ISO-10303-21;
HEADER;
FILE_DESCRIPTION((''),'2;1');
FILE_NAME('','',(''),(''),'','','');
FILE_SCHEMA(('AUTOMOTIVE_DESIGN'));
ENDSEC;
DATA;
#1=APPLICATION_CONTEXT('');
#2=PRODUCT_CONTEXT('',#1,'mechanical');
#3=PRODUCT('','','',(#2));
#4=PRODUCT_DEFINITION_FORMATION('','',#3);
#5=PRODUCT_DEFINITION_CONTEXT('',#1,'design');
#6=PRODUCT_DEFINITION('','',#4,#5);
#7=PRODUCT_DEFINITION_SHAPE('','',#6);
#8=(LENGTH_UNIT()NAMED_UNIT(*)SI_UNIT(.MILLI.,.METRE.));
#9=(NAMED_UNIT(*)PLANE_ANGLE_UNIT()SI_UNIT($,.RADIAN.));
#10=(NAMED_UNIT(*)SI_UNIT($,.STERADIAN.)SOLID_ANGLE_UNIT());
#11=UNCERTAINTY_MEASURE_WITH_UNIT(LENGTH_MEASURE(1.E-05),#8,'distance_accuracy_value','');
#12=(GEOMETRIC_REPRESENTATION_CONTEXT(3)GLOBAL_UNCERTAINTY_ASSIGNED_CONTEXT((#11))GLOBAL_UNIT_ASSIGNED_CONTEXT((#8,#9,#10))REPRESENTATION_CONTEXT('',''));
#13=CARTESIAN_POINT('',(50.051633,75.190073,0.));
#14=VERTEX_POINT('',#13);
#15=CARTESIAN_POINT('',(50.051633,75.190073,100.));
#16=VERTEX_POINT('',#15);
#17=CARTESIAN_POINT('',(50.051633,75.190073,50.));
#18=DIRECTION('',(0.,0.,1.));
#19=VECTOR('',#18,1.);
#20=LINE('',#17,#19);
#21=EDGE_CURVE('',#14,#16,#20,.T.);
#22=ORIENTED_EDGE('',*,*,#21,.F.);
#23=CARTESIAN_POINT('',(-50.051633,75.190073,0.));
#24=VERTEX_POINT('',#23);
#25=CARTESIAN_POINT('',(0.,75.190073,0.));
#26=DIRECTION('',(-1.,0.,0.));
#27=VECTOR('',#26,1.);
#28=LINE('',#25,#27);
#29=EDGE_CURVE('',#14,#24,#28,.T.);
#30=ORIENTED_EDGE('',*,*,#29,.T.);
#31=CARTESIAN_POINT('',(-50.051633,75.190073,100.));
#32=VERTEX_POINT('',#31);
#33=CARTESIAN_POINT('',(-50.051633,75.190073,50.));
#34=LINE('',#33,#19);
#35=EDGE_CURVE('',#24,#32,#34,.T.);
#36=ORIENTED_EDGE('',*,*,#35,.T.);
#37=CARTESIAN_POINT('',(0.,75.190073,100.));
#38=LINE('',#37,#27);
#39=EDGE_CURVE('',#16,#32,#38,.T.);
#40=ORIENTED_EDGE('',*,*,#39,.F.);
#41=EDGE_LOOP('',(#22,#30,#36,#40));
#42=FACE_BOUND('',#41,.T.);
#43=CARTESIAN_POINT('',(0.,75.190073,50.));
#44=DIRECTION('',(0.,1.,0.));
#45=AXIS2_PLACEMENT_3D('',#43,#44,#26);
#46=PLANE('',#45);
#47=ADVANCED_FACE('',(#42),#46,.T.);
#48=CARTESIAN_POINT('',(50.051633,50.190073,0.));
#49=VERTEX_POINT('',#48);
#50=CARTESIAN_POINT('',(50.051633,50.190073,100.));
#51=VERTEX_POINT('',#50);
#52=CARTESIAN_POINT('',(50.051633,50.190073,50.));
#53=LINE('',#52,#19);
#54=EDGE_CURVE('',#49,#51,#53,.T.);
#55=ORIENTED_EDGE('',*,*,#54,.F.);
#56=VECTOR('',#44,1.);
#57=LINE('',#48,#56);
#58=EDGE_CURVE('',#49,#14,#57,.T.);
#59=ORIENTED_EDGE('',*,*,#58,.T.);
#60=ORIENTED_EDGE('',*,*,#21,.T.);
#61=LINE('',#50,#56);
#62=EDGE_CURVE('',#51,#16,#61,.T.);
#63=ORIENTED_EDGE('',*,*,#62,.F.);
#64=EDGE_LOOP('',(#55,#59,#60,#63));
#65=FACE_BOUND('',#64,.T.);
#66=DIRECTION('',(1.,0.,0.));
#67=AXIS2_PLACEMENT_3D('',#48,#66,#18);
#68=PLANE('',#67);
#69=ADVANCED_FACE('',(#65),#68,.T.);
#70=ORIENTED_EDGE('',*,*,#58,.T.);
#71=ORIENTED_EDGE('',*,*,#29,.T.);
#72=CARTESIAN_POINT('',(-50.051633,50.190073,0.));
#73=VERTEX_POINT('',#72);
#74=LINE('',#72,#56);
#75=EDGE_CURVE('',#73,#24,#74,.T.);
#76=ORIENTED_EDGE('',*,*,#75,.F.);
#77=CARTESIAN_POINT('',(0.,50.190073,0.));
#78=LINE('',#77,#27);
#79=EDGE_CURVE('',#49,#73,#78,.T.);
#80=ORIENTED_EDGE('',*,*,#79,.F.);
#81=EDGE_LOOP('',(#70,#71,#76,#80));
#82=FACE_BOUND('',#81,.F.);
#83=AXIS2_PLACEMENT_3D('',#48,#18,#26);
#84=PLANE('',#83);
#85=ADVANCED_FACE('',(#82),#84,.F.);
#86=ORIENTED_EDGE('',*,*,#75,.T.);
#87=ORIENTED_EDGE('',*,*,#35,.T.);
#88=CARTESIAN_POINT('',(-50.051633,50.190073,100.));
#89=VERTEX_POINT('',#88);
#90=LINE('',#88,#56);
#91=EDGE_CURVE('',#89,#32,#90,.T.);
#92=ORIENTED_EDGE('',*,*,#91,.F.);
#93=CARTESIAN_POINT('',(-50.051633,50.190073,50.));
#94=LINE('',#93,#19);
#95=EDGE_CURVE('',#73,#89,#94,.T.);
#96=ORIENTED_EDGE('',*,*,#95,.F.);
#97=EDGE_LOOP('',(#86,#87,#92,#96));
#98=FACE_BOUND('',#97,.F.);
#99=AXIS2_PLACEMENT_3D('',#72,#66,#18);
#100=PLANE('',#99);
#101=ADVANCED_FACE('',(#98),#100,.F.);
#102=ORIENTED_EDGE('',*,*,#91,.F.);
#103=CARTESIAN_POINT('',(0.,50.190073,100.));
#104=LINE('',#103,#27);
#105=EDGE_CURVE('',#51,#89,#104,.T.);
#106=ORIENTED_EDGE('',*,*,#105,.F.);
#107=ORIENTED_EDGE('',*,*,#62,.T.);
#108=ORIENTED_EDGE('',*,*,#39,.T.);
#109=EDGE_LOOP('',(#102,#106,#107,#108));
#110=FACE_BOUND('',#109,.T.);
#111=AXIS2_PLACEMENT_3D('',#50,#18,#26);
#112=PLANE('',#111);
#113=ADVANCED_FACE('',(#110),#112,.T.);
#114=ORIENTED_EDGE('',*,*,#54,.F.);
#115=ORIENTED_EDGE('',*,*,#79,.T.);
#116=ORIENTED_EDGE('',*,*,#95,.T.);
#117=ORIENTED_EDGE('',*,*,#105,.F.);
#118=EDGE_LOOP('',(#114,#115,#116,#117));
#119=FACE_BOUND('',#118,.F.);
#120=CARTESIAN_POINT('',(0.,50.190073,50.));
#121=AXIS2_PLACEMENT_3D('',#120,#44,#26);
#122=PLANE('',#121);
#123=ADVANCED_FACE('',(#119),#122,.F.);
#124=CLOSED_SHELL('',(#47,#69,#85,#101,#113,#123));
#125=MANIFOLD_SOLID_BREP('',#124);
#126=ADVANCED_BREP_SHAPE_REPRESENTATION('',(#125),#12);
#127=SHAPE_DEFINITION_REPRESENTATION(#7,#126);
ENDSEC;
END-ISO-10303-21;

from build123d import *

# Parameters (mm, degrees)
F1_E0_BOTTOM_W = 100.1032665372
F1_E0_BOTTOM_H = 100
F2_DEPTH       = 25


with BuildPart() as f2:
    # F1_E0_bottom (on explicit) → F2 (new body)
    with BuildSketch(Plane(origin=(50.0516332686, 50.1900725067, 0), x_dir=(-1, 0, 0), z_dir=(0, 1, 0))):
        with Locations((50.0516332686, 50)):
            Rectangle(F1_E0_BOTTOM_W, F1_E0_BOTTOM_H)
    extrude(amount=F2_DEPTH)


solid = f2.part
